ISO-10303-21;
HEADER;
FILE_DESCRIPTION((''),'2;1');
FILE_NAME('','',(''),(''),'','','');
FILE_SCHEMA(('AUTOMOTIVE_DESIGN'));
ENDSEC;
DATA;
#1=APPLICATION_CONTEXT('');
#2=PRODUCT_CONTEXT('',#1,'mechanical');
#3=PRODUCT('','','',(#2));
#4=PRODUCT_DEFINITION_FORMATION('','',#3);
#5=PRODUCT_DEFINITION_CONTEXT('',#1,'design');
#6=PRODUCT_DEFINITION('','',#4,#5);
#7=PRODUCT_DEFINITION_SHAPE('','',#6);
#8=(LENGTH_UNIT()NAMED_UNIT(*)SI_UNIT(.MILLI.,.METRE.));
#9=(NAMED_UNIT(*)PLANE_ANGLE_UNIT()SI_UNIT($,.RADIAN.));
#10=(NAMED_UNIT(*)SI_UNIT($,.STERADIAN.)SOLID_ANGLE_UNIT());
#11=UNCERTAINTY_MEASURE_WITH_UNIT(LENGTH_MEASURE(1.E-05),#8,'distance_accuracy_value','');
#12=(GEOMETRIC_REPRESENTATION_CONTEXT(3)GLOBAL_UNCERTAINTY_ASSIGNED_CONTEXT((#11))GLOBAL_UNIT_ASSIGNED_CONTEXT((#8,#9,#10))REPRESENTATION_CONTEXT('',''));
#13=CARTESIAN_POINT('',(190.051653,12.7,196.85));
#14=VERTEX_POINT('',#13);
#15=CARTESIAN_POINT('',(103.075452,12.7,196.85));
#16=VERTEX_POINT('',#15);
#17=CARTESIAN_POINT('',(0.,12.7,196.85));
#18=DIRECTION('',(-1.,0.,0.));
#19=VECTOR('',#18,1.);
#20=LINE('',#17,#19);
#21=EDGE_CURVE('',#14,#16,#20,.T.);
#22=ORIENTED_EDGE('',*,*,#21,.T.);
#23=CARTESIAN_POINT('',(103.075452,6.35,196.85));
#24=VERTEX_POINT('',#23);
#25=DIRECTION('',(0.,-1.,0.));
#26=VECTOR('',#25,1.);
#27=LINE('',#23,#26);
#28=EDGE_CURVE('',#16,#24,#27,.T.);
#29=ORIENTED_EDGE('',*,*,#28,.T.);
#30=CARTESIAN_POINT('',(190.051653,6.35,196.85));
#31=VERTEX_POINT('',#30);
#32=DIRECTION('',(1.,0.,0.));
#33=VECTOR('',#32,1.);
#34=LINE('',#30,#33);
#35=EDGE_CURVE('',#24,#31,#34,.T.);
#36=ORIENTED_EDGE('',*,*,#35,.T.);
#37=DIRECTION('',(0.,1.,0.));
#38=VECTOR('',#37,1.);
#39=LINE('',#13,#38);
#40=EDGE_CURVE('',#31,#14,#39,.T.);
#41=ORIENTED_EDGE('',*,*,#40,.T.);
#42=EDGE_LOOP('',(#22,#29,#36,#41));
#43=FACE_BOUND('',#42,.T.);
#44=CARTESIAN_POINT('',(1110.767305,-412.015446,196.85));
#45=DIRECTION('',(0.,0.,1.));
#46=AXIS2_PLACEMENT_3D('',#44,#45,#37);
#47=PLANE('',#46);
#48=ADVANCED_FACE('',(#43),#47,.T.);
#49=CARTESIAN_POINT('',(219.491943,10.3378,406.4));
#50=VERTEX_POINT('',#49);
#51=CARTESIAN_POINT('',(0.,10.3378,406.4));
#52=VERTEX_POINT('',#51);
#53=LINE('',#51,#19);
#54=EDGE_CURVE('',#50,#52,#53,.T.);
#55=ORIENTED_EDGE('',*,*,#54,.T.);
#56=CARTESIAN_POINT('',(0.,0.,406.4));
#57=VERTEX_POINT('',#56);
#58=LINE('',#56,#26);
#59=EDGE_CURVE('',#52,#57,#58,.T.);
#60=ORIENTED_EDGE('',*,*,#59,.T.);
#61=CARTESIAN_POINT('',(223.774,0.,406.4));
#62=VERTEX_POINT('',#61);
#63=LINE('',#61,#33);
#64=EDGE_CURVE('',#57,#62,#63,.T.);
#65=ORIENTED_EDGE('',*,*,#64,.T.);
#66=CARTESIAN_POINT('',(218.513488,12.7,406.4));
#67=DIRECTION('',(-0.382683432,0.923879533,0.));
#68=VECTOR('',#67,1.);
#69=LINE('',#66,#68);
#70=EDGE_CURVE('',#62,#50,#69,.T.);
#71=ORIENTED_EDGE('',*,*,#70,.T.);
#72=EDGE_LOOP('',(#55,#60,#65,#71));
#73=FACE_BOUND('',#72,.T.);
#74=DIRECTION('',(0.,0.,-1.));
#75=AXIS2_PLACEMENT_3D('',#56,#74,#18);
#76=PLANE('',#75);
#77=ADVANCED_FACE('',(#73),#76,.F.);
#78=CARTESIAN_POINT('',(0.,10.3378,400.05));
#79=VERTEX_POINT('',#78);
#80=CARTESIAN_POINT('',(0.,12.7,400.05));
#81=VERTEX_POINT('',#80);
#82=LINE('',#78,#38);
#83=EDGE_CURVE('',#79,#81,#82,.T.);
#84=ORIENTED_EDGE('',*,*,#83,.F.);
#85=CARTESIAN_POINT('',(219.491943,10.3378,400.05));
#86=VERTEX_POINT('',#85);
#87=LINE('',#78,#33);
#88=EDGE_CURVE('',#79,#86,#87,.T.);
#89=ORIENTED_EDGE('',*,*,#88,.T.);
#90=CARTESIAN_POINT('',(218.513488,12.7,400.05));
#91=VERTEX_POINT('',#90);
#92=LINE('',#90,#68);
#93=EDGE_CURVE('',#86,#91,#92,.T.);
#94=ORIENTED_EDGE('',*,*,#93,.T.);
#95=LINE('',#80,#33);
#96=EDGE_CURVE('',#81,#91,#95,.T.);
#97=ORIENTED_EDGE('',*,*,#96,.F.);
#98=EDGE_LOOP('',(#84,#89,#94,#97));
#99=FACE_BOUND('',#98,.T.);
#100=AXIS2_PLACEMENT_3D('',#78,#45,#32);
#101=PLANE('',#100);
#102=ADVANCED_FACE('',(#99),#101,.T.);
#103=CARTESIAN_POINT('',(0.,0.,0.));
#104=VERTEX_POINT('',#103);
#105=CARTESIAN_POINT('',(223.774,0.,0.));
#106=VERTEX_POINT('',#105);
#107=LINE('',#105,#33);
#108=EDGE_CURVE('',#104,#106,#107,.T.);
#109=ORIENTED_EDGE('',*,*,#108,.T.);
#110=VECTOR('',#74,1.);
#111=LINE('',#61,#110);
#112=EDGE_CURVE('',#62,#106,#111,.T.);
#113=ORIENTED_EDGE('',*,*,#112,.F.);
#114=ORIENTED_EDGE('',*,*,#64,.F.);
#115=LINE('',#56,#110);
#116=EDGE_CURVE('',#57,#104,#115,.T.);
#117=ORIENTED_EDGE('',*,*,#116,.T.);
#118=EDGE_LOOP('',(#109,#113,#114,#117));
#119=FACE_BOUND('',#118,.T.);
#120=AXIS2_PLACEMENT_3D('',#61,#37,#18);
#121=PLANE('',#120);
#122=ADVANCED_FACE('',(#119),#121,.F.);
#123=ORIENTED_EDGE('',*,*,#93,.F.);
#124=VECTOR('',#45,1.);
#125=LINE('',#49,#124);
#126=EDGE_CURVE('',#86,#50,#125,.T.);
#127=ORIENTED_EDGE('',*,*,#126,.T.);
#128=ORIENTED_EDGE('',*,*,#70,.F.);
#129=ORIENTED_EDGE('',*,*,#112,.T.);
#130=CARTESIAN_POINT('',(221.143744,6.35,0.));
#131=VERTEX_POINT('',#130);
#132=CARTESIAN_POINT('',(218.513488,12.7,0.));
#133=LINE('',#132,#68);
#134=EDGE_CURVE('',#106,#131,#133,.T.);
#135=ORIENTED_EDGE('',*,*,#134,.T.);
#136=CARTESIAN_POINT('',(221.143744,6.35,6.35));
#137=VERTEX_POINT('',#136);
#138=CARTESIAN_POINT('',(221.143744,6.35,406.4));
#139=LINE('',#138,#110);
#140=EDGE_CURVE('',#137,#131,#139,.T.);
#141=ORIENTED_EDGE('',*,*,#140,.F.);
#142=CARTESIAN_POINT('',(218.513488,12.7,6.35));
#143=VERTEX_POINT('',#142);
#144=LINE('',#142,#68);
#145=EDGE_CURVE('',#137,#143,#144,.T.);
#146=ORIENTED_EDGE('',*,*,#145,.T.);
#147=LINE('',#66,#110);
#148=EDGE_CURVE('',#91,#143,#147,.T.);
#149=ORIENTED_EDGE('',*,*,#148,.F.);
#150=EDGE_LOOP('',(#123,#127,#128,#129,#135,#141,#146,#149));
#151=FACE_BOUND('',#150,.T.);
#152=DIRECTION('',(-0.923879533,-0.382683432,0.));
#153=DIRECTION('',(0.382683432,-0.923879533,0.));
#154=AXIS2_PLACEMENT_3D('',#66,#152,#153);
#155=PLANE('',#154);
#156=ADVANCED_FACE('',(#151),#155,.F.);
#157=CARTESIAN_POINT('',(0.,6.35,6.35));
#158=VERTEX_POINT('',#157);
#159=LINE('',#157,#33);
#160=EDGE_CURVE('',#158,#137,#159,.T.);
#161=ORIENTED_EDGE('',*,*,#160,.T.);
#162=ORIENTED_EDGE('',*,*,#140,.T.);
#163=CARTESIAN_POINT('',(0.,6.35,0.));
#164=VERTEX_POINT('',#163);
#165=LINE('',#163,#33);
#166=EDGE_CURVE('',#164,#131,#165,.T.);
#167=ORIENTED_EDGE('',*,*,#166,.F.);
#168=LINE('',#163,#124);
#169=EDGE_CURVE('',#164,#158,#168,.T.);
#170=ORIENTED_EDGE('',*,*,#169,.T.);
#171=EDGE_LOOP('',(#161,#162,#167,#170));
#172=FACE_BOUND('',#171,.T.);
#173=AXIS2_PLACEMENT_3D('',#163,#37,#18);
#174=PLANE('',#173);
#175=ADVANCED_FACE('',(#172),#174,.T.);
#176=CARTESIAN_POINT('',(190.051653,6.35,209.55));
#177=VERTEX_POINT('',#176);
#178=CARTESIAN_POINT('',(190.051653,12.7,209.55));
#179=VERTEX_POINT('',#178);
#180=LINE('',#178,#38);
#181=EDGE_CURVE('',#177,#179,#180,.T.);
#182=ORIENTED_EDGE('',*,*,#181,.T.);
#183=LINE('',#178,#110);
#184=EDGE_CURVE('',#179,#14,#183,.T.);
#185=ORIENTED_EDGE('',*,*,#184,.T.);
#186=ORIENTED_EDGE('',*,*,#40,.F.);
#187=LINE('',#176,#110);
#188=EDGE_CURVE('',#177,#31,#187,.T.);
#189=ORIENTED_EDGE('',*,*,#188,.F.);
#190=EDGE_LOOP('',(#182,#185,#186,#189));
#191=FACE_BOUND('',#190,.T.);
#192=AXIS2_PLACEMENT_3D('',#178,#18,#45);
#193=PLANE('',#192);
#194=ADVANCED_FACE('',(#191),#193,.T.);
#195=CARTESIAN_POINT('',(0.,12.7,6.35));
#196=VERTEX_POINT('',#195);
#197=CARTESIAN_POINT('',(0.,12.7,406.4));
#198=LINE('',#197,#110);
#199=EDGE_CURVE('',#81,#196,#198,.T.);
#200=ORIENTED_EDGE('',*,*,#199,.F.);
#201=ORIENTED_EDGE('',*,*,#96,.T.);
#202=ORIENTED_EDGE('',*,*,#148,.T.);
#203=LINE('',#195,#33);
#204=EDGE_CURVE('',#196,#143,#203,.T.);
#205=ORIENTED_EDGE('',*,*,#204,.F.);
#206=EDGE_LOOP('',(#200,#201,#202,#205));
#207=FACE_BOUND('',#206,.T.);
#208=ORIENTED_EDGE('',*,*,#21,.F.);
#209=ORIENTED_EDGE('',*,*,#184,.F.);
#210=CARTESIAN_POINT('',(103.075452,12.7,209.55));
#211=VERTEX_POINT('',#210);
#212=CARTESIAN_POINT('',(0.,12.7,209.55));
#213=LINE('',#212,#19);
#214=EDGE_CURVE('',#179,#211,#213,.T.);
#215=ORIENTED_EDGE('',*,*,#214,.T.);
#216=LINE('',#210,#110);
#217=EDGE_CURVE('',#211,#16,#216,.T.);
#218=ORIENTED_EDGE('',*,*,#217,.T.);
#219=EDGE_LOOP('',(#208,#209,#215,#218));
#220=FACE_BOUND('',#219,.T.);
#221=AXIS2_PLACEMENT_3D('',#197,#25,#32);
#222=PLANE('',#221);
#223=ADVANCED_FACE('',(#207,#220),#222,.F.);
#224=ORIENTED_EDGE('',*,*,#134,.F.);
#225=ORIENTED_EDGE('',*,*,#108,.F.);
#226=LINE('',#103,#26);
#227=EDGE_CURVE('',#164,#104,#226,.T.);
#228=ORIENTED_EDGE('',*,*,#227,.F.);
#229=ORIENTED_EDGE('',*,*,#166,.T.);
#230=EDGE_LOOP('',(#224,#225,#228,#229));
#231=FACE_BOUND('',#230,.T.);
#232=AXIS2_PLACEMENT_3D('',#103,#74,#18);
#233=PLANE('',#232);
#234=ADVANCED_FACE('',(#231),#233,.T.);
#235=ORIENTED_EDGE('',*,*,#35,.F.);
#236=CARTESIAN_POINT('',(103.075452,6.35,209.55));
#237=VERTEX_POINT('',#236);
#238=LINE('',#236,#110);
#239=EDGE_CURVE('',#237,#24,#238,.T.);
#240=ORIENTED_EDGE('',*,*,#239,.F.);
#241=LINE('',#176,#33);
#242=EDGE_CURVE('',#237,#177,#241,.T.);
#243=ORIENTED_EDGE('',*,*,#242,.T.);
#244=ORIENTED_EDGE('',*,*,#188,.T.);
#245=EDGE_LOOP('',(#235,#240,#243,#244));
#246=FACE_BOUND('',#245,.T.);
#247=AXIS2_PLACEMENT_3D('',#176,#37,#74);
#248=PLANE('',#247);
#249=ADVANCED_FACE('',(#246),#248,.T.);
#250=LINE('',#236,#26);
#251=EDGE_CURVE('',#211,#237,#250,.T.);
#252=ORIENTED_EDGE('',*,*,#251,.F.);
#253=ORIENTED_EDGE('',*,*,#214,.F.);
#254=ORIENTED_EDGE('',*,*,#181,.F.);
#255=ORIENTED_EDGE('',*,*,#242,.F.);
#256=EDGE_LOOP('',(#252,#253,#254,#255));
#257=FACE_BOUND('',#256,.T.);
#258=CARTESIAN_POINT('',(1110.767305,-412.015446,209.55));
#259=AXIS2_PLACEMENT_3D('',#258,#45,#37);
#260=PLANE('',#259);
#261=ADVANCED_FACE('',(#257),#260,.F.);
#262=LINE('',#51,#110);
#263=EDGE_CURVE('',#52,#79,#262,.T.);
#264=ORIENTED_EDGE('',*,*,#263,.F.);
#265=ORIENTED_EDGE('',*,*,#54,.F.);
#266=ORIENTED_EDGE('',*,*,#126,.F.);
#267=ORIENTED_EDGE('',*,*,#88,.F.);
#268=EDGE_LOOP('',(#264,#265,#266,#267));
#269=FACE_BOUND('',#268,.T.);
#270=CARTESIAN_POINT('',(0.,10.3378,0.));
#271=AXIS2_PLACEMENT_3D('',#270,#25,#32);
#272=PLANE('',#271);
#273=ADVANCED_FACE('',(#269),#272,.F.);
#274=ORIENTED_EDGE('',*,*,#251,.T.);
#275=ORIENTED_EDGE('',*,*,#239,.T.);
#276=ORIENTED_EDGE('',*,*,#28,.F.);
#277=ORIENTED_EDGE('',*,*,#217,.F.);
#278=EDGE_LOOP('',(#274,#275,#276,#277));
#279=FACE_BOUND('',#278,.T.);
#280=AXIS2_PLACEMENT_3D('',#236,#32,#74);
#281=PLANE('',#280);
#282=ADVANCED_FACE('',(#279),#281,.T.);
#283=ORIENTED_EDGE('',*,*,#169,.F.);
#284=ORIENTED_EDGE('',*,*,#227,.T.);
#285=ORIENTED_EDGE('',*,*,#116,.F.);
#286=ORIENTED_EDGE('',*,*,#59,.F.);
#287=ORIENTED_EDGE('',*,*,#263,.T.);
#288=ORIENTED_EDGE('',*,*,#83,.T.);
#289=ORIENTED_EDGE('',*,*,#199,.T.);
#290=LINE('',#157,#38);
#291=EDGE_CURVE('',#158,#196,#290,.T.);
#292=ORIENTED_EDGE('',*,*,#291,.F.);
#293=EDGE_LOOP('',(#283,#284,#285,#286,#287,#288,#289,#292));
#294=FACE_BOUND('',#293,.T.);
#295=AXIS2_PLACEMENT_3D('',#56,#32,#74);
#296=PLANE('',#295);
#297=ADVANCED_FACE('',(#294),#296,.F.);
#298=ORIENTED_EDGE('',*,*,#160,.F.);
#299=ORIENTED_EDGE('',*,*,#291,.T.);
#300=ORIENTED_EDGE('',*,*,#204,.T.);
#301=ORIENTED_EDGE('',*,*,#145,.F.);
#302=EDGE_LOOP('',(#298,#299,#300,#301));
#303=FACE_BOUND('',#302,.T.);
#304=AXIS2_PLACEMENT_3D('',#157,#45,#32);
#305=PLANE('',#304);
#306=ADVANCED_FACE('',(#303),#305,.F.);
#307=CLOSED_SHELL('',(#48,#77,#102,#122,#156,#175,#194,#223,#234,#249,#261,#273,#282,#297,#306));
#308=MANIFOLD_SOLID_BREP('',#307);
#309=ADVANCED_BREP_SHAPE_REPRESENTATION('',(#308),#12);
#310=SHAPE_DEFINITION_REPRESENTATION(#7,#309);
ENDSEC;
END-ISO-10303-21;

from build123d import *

# Parameters (mm, degrees)
BOSS_EXTRUDE1_DEPTH = 406.4
SKETCH2_W           = 223.774
SKETCH2_H           = 6.35
CUT_EXTRUDE1_DEPTH  = 2.3622
CAVITY1_START       = 196.85
CAVITY1_OUTLINE_W   = 86.97620095
CAVITY1_OUTLINE_H   = 6.35
CAVITY1_DEPTH       = 12.7
SKETCH3_W           = 266.782886341
SKETCH3_H           = 6.35
CUT_EXTRUDE2_DEPTH  = 6.35


# Read off the part's stored shape, not the designer's step: Cavity1
with BuildPart() as part:
    # Sketch1 → Boss-Extrude1 (new body)
    with BuildSketch(Plane.XY):
        Polygon((0, 0), (0, 12.7), (218.513487758, 12.7), (223.774, 0), align=None)
    extrude(amount=BOSS_EXTRUDE1_DEPTH)

    # Sketch2 → Cut-Extrude1 (cut)
    with BuildSketch(Plane.XZ.offset(-12.7)):
        with Locations((111.887, 403.225)):
            Rectangle(SKETCH2_W, SKETCH2_H)
    extrude(amount=CUT_EXTRUDE1_DEPTH, mode=Mode.SUBTRACT)

    # Cavity1 outline → Cavity1 (cut)
    with BuildSketch(Plane.XY.offset(CAVITY1_START)):
        with Locations((146.563552259, 9.525)):
            Rectangle(CAVITY1_OUTLINE_W, CAVITY1_OUTLINE_H)
    extrude(amount=CAVITY1_DEPTH, mode=Mode.SUBTRACT)

    # Sketch3 → Cut-Extrude2 (cut)
    with BuildSketch(Plane(origin=(0, 12.7, 0), x_dir=(1, 0, 0), z_dir=(0, 1, 0))):
        with Locations((133.39144317, -3.175)):
            Rectangle(SKETCH3_W, SKETCH3_H)
    extrude(amount=-CUT_EXTRUDE2_DEPTH, mode=Mode.SUBTRACT)


solid = part.part
